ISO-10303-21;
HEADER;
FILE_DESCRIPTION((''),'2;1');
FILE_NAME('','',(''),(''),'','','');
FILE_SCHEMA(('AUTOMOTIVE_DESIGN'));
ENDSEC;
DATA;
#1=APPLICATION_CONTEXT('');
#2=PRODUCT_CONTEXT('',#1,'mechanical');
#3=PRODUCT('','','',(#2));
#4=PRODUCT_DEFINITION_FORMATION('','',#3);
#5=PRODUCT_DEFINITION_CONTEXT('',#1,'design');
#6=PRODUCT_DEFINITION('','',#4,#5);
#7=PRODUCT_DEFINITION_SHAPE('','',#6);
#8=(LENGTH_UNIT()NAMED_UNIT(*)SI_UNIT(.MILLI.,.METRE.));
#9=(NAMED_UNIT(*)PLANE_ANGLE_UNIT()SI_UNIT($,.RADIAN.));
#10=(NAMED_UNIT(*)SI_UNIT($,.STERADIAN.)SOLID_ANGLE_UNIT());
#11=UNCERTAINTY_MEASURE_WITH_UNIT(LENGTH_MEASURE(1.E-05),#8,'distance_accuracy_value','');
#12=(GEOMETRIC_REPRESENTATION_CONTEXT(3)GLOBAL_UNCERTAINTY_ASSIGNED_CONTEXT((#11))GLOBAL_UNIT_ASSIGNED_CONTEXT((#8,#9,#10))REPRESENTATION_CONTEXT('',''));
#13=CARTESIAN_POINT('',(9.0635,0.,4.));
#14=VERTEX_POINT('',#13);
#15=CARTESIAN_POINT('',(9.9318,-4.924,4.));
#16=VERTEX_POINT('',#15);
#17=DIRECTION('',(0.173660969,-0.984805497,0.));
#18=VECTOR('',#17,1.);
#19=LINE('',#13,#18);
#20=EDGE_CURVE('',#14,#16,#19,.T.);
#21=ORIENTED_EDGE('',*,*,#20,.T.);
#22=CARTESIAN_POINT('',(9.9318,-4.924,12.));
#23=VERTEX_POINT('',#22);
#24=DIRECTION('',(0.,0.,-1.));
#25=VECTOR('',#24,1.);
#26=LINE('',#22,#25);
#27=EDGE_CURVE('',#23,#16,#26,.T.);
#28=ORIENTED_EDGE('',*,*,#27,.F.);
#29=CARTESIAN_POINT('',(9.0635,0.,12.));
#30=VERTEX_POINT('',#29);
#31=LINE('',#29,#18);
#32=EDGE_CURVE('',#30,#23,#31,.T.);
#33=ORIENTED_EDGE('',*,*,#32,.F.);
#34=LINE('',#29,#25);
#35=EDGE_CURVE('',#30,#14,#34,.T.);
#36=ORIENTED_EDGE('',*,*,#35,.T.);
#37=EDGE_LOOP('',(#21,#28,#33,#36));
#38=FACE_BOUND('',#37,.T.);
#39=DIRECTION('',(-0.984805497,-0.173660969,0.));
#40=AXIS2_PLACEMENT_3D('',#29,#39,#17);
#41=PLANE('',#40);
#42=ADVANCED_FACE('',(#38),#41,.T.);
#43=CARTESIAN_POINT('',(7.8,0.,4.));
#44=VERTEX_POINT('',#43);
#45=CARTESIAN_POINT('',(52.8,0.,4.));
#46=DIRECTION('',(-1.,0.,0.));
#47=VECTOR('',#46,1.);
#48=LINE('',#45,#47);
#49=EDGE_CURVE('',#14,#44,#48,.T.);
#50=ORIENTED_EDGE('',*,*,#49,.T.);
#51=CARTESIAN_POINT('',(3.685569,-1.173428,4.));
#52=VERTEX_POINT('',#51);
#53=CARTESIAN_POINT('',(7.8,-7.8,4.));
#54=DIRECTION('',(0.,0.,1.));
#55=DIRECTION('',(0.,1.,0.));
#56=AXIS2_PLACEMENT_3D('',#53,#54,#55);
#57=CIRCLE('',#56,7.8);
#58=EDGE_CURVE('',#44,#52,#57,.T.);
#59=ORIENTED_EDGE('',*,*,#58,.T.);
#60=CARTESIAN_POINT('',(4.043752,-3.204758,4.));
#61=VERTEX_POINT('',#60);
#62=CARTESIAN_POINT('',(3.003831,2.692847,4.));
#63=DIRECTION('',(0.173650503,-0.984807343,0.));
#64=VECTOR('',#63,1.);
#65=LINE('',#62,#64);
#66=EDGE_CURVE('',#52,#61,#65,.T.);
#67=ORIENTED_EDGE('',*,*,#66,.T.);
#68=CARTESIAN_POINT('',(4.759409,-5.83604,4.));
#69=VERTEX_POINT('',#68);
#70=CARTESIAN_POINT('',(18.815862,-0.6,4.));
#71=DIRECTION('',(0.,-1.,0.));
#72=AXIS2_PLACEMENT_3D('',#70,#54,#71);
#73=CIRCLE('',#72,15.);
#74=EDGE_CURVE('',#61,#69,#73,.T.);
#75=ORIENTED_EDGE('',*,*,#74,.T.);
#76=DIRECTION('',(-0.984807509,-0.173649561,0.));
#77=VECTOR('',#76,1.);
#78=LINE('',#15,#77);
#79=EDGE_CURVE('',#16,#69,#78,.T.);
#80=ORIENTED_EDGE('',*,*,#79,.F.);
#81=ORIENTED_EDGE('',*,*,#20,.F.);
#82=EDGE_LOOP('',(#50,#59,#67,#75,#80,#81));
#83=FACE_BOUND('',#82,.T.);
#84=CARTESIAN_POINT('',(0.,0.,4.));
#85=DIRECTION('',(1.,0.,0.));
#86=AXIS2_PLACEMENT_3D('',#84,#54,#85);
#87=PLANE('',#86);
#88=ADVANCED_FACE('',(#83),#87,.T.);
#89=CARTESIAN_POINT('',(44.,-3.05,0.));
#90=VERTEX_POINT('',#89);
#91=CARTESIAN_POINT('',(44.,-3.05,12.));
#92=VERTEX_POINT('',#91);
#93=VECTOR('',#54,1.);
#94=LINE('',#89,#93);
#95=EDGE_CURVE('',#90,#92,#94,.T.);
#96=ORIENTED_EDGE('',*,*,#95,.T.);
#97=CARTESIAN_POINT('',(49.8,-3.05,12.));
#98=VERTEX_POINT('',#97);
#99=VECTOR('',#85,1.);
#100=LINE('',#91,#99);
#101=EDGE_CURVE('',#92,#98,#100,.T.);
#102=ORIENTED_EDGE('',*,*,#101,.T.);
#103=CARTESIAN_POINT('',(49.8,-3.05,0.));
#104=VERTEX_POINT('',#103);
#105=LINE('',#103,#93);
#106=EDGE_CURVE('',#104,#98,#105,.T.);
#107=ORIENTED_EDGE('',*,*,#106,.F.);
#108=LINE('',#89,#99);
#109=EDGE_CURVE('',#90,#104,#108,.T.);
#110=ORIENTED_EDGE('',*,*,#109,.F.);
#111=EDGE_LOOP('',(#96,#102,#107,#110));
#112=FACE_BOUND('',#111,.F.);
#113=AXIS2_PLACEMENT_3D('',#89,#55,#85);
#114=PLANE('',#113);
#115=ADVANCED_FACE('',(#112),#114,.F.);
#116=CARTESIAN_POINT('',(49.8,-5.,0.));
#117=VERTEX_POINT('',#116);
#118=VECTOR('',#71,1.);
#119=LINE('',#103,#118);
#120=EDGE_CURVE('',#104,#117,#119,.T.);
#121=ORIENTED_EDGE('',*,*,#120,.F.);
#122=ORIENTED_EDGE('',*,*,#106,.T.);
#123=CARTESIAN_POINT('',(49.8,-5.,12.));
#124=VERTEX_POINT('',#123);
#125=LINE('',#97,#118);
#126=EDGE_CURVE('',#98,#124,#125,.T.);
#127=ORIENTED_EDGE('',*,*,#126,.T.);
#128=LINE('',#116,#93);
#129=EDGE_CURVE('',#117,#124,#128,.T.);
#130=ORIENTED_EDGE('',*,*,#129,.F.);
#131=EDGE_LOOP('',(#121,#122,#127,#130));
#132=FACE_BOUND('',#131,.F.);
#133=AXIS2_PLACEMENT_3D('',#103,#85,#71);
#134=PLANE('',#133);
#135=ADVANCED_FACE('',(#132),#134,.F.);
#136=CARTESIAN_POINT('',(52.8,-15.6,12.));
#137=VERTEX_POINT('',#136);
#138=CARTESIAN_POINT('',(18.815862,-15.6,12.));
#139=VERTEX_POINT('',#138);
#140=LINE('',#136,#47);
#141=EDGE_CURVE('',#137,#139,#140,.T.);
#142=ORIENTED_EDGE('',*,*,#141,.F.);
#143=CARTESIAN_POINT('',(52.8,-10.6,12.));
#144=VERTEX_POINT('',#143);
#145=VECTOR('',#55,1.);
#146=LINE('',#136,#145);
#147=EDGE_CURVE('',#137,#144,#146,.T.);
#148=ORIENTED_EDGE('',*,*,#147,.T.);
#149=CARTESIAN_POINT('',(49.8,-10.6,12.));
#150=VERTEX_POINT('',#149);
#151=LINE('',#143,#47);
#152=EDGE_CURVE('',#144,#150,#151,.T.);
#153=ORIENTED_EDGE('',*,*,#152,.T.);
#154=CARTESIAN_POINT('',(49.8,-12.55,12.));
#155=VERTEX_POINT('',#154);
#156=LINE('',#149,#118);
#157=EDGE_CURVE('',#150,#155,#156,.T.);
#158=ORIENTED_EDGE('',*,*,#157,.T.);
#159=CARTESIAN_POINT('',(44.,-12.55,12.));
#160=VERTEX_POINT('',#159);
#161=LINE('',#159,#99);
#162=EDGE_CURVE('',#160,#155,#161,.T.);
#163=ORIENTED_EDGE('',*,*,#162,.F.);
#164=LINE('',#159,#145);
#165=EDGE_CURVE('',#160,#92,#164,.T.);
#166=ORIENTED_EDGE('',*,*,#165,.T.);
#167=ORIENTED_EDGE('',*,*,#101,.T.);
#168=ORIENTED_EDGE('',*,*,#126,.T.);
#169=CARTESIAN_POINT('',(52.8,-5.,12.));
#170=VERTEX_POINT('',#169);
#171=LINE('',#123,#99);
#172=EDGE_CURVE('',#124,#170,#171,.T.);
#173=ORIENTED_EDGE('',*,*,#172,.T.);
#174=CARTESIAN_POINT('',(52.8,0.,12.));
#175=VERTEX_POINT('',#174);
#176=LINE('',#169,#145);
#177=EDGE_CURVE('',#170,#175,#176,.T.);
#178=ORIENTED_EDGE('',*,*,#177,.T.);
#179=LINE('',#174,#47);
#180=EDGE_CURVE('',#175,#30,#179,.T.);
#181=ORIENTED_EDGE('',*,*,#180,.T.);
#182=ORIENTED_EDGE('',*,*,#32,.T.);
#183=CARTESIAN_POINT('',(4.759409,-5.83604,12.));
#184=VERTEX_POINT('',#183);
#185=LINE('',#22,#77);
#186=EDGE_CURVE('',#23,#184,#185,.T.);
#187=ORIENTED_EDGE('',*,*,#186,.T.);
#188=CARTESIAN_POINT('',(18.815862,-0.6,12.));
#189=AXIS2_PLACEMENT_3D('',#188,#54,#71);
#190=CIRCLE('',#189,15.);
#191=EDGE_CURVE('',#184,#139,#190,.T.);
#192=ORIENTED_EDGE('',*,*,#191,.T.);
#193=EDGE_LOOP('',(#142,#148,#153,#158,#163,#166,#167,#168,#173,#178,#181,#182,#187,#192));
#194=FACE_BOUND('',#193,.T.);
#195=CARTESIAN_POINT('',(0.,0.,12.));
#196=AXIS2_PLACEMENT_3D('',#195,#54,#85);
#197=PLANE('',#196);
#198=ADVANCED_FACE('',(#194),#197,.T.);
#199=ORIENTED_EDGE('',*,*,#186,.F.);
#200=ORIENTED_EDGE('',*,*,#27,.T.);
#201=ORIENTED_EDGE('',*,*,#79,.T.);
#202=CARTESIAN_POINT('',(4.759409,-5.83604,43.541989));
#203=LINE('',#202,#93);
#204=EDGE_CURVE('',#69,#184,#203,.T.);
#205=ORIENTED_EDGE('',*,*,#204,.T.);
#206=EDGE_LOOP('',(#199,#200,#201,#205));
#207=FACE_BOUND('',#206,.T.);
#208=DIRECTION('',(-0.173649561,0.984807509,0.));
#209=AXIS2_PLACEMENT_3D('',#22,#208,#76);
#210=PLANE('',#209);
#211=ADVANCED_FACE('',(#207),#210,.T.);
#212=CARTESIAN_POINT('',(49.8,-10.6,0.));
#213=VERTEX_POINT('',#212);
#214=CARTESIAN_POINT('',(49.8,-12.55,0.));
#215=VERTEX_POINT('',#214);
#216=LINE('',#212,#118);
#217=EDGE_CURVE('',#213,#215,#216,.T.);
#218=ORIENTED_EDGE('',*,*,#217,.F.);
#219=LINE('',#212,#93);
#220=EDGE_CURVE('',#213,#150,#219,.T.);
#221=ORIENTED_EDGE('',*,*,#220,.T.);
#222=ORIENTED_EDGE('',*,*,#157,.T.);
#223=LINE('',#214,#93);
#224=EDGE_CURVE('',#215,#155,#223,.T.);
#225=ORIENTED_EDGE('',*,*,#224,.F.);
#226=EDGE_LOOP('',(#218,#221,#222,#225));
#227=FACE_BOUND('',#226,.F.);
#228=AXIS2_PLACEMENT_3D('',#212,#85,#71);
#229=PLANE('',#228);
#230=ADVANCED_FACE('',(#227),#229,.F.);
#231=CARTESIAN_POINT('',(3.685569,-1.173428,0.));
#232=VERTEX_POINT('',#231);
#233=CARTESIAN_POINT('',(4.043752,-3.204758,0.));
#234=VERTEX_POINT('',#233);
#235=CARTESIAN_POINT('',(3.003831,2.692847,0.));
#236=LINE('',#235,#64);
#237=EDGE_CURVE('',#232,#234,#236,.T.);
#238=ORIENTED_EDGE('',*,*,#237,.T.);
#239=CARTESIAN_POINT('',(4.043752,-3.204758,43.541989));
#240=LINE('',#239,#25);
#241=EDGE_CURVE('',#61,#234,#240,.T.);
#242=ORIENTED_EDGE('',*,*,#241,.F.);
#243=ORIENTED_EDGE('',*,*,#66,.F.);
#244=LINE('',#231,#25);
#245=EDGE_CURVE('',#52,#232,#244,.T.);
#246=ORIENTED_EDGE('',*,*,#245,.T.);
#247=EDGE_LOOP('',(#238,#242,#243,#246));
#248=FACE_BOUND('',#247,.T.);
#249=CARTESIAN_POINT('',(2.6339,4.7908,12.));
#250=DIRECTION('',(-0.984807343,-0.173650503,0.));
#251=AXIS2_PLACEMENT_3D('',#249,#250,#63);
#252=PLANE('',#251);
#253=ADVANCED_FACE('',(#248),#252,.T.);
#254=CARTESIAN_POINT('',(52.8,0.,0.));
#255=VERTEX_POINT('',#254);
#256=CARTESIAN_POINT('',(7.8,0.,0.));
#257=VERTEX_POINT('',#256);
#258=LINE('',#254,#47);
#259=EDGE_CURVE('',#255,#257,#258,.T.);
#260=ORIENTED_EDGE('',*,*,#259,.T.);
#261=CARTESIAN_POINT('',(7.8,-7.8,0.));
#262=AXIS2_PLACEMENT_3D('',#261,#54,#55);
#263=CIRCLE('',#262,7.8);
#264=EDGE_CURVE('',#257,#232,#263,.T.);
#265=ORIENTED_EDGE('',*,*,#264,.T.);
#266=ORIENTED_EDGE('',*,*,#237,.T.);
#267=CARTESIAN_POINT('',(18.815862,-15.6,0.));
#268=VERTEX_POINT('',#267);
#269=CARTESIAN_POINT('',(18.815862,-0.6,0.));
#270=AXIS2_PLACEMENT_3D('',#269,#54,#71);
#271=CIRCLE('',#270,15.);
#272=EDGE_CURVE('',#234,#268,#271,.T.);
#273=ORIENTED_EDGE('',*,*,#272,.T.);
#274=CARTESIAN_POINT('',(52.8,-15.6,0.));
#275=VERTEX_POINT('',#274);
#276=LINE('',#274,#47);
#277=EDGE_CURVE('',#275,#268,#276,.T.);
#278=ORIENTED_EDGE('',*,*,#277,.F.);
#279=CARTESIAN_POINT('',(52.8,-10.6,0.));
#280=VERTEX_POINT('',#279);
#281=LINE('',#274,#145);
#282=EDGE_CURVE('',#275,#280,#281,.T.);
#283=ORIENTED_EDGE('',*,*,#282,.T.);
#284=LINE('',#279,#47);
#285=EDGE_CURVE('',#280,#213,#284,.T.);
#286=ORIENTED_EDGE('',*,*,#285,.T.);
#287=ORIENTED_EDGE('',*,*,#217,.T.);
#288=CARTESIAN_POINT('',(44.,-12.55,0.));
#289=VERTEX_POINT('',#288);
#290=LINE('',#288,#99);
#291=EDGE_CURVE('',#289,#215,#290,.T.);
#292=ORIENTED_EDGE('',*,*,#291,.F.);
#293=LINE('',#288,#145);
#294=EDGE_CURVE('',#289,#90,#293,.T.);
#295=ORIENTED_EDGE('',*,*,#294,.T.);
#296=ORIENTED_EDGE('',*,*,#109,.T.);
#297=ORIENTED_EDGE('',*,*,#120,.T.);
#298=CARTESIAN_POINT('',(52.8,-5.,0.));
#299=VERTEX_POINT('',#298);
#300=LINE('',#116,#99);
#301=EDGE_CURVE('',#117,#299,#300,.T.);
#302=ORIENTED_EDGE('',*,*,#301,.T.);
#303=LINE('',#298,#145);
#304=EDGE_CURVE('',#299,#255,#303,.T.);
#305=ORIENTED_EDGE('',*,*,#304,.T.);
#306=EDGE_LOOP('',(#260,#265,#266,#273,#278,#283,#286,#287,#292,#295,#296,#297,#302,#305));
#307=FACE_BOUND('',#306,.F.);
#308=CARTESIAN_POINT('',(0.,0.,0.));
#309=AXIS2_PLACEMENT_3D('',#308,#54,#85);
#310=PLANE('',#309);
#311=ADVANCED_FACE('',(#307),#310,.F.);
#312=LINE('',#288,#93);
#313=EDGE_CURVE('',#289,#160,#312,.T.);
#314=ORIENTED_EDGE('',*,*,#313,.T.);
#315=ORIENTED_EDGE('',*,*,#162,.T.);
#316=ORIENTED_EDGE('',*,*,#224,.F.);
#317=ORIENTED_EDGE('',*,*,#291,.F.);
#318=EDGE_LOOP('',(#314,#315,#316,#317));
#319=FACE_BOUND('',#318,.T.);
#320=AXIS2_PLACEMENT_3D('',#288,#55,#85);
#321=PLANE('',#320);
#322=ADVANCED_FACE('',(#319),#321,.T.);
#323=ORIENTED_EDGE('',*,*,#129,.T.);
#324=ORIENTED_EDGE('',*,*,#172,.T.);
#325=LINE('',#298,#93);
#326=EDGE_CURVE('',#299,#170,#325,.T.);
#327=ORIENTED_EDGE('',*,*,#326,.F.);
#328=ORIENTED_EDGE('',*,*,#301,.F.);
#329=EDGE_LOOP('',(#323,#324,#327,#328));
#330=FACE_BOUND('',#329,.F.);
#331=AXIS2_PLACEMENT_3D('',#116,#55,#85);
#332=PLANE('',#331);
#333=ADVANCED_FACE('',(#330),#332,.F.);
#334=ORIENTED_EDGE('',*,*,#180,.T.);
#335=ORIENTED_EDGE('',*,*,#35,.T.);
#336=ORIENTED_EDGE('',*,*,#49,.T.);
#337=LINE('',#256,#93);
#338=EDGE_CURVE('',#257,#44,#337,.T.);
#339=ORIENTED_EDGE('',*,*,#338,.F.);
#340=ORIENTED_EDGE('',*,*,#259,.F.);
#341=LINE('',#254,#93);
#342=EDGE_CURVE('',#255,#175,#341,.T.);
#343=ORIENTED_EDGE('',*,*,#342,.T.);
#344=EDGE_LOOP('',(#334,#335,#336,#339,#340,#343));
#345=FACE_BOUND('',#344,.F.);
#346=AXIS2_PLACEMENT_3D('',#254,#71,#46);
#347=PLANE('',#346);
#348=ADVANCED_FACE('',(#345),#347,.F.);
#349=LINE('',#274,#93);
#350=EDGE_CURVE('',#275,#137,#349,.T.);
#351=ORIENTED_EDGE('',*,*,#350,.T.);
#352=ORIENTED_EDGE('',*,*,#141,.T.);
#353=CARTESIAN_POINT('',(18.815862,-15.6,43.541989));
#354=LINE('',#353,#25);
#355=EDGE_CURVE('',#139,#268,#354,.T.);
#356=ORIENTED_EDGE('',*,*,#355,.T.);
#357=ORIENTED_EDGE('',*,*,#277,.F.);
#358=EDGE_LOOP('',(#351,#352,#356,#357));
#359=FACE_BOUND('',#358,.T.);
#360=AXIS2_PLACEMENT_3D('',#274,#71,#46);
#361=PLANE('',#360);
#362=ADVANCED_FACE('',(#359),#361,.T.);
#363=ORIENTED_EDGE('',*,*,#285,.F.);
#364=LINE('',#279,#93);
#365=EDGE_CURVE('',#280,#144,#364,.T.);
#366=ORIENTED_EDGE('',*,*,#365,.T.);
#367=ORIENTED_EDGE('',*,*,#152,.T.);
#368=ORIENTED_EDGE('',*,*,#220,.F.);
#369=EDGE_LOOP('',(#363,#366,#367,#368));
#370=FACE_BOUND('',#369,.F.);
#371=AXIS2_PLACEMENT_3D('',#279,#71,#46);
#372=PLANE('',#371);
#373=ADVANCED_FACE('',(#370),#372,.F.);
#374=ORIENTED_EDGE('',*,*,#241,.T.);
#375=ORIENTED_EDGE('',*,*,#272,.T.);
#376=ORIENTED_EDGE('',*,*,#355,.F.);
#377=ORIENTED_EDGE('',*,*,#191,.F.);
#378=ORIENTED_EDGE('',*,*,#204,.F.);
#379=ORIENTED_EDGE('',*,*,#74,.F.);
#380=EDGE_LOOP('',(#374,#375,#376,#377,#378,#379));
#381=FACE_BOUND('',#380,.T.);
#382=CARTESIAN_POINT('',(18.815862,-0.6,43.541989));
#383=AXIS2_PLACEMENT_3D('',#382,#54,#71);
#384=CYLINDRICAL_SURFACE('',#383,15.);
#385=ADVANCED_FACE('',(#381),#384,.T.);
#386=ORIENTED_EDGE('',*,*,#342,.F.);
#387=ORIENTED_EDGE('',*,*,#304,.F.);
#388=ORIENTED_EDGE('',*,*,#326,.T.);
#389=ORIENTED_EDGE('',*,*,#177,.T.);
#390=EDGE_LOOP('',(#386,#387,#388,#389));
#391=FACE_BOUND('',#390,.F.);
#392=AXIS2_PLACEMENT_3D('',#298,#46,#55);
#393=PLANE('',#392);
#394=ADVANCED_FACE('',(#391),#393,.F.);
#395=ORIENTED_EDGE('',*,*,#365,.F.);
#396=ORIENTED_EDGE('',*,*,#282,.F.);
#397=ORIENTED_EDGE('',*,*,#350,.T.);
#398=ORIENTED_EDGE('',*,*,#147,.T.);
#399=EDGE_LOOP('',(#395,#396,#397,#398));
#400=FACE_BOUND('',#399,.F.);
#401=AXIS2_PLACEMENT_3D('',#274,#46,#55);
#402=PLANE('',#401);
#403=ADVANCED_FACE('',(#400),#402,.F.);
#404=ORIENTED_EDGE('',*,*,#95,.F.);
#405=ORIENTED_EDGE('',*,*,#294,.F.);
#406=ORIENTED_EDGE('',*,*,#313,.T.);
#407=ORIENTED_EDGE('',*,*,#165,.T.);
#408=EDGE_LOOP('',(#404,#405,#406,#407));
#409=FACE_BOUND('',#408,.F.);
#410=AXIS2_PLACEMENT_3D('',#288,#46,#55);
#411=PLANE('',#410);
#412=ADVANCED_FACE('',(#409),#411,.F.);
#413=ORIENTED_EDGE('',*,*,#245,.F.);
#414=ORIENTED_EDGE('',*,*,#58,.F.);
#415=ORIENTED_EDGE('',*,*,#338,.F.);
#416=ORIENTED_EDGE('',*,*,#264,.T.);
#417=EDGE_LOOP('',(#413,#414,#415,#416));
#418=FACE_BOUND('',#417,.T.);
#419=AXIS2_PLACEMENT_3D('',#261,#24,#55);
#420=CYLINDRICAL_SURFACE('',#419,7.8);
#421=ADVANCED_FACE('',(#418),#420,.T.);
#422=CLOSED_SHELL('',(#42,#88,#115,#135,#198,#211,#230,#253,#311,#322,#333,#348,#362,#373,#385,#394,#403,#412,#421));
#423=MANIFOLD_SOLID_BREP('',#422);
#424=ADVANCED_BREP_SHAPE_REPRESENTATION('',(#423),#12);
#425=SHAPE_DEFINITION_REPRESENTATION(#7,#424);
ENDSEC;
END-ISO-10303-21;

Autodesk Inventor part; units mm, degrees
ref_plane "YZ Plane" through (0, 0, 0) normal (1, 0, 0) x (0, 1, 0)
ref_plane "XZ Plane" through (0, 0, 0) normal (0, 1, 0) x (-1, 0, 0)
ref_plane "XY Plane" through (0, 0, 0) normal (0, 0, 1) x (1, 0, 0)
sketch "Sketch5" plane through (0, 0, 0) normal (0, 0, 1) x (1, 0, 0)
  line L0 (52.8, -15.6) -> (52.8, -10.6)
  line L1 (52.8, -10.6) -> (49.8, -10.6)
  line L2 (49.8, -10.6) -> (49.8, -12.55)
  line L3 (44, -12.55) -> (44, -3.05)
  line L4 (49.8, -3.05) -> (49.8, -5)
  line L5 (49.8, -5) -> (52.8, -5)
  line L6 (52.8, -5) -> (52.8, 0)
  line L7 (52.8, 0) -> (7.8, 0)
  line L8 (44, -3.05) -> (49.8, -3.05)
  line L9 (44, -12.55) -> (49.8, -12.55)
  line L10 (52.8, -15.6) -> (7.8, -15.6)
  arc A0 (7.8, 0) -> (7.8, -15.6) centre (7.8, -7.8) ccw
  point P0 (0, 0)
  dimension "d41" = 5.8
  dimension "d48" = 44
  dimension "d50" = 3
  dimension "d63" = 45
  dimension "d67" = 15.6
  dimension "d71" = 0
  dimension "d72" = 36.2
  dimension "d87" = 5.6
  dimension "d88" = 9.5
extrude "Extrusion2" add sketch "Sketch5" along normal blind 12
sketch "Sketch11" plane through (0, 0, 12) normal (0, 0, 1) x (1, 0, 0)
  line L0 (52.8, 0) -> (7.8, 0) projected
  line L1 (9.0635, 0) -> (9.9318, -4.924)
  line L2 (9.9318, -4.924) -> (0.0837, -6.6605)
  arc A0 (7.8, 0) -> (7.8, -15.6) centre (7.8, -7.8) ccw projected
  point P0 (0, 0)
  dimension "d95" = 100
  dimension "d96" = 5
  dimension "d97" = 10
extrude "Extrusion7" cut sketch "Sketch11" against normal blind 8 from surface at 0
sketch "Sketch14" plane through (0, 0, 12) normal (0, 0, 1) x (1, 0, 0)
  line L0 (2.6339, 4.7908) -> (6.9247, -19.5432)
  line L1 (6.9247, -19.5432) -> (-9.4392, -22.4286)
  line L2 (-9.4392, -22.4286) -> (-13.7299, 1.9055)
  line L3 (-13.7299, 1.9055) -> (2.6339, 4.7908)
  line L4 (9.0635, 0) -> (9.9318, -4.924) projected
  point P0 (0, 0)
  dimension "d107" = 5.5
extrude "Extrusion10" cut sketch "Sketch14" against normal through all
fillet "Fillet2" radius 15 1 edges at (6.2001, -15.4342, 6)
equation "\"l1\" = 8"
properties part number "Finray_test_8_Kerbe_10deg_V4_links"
